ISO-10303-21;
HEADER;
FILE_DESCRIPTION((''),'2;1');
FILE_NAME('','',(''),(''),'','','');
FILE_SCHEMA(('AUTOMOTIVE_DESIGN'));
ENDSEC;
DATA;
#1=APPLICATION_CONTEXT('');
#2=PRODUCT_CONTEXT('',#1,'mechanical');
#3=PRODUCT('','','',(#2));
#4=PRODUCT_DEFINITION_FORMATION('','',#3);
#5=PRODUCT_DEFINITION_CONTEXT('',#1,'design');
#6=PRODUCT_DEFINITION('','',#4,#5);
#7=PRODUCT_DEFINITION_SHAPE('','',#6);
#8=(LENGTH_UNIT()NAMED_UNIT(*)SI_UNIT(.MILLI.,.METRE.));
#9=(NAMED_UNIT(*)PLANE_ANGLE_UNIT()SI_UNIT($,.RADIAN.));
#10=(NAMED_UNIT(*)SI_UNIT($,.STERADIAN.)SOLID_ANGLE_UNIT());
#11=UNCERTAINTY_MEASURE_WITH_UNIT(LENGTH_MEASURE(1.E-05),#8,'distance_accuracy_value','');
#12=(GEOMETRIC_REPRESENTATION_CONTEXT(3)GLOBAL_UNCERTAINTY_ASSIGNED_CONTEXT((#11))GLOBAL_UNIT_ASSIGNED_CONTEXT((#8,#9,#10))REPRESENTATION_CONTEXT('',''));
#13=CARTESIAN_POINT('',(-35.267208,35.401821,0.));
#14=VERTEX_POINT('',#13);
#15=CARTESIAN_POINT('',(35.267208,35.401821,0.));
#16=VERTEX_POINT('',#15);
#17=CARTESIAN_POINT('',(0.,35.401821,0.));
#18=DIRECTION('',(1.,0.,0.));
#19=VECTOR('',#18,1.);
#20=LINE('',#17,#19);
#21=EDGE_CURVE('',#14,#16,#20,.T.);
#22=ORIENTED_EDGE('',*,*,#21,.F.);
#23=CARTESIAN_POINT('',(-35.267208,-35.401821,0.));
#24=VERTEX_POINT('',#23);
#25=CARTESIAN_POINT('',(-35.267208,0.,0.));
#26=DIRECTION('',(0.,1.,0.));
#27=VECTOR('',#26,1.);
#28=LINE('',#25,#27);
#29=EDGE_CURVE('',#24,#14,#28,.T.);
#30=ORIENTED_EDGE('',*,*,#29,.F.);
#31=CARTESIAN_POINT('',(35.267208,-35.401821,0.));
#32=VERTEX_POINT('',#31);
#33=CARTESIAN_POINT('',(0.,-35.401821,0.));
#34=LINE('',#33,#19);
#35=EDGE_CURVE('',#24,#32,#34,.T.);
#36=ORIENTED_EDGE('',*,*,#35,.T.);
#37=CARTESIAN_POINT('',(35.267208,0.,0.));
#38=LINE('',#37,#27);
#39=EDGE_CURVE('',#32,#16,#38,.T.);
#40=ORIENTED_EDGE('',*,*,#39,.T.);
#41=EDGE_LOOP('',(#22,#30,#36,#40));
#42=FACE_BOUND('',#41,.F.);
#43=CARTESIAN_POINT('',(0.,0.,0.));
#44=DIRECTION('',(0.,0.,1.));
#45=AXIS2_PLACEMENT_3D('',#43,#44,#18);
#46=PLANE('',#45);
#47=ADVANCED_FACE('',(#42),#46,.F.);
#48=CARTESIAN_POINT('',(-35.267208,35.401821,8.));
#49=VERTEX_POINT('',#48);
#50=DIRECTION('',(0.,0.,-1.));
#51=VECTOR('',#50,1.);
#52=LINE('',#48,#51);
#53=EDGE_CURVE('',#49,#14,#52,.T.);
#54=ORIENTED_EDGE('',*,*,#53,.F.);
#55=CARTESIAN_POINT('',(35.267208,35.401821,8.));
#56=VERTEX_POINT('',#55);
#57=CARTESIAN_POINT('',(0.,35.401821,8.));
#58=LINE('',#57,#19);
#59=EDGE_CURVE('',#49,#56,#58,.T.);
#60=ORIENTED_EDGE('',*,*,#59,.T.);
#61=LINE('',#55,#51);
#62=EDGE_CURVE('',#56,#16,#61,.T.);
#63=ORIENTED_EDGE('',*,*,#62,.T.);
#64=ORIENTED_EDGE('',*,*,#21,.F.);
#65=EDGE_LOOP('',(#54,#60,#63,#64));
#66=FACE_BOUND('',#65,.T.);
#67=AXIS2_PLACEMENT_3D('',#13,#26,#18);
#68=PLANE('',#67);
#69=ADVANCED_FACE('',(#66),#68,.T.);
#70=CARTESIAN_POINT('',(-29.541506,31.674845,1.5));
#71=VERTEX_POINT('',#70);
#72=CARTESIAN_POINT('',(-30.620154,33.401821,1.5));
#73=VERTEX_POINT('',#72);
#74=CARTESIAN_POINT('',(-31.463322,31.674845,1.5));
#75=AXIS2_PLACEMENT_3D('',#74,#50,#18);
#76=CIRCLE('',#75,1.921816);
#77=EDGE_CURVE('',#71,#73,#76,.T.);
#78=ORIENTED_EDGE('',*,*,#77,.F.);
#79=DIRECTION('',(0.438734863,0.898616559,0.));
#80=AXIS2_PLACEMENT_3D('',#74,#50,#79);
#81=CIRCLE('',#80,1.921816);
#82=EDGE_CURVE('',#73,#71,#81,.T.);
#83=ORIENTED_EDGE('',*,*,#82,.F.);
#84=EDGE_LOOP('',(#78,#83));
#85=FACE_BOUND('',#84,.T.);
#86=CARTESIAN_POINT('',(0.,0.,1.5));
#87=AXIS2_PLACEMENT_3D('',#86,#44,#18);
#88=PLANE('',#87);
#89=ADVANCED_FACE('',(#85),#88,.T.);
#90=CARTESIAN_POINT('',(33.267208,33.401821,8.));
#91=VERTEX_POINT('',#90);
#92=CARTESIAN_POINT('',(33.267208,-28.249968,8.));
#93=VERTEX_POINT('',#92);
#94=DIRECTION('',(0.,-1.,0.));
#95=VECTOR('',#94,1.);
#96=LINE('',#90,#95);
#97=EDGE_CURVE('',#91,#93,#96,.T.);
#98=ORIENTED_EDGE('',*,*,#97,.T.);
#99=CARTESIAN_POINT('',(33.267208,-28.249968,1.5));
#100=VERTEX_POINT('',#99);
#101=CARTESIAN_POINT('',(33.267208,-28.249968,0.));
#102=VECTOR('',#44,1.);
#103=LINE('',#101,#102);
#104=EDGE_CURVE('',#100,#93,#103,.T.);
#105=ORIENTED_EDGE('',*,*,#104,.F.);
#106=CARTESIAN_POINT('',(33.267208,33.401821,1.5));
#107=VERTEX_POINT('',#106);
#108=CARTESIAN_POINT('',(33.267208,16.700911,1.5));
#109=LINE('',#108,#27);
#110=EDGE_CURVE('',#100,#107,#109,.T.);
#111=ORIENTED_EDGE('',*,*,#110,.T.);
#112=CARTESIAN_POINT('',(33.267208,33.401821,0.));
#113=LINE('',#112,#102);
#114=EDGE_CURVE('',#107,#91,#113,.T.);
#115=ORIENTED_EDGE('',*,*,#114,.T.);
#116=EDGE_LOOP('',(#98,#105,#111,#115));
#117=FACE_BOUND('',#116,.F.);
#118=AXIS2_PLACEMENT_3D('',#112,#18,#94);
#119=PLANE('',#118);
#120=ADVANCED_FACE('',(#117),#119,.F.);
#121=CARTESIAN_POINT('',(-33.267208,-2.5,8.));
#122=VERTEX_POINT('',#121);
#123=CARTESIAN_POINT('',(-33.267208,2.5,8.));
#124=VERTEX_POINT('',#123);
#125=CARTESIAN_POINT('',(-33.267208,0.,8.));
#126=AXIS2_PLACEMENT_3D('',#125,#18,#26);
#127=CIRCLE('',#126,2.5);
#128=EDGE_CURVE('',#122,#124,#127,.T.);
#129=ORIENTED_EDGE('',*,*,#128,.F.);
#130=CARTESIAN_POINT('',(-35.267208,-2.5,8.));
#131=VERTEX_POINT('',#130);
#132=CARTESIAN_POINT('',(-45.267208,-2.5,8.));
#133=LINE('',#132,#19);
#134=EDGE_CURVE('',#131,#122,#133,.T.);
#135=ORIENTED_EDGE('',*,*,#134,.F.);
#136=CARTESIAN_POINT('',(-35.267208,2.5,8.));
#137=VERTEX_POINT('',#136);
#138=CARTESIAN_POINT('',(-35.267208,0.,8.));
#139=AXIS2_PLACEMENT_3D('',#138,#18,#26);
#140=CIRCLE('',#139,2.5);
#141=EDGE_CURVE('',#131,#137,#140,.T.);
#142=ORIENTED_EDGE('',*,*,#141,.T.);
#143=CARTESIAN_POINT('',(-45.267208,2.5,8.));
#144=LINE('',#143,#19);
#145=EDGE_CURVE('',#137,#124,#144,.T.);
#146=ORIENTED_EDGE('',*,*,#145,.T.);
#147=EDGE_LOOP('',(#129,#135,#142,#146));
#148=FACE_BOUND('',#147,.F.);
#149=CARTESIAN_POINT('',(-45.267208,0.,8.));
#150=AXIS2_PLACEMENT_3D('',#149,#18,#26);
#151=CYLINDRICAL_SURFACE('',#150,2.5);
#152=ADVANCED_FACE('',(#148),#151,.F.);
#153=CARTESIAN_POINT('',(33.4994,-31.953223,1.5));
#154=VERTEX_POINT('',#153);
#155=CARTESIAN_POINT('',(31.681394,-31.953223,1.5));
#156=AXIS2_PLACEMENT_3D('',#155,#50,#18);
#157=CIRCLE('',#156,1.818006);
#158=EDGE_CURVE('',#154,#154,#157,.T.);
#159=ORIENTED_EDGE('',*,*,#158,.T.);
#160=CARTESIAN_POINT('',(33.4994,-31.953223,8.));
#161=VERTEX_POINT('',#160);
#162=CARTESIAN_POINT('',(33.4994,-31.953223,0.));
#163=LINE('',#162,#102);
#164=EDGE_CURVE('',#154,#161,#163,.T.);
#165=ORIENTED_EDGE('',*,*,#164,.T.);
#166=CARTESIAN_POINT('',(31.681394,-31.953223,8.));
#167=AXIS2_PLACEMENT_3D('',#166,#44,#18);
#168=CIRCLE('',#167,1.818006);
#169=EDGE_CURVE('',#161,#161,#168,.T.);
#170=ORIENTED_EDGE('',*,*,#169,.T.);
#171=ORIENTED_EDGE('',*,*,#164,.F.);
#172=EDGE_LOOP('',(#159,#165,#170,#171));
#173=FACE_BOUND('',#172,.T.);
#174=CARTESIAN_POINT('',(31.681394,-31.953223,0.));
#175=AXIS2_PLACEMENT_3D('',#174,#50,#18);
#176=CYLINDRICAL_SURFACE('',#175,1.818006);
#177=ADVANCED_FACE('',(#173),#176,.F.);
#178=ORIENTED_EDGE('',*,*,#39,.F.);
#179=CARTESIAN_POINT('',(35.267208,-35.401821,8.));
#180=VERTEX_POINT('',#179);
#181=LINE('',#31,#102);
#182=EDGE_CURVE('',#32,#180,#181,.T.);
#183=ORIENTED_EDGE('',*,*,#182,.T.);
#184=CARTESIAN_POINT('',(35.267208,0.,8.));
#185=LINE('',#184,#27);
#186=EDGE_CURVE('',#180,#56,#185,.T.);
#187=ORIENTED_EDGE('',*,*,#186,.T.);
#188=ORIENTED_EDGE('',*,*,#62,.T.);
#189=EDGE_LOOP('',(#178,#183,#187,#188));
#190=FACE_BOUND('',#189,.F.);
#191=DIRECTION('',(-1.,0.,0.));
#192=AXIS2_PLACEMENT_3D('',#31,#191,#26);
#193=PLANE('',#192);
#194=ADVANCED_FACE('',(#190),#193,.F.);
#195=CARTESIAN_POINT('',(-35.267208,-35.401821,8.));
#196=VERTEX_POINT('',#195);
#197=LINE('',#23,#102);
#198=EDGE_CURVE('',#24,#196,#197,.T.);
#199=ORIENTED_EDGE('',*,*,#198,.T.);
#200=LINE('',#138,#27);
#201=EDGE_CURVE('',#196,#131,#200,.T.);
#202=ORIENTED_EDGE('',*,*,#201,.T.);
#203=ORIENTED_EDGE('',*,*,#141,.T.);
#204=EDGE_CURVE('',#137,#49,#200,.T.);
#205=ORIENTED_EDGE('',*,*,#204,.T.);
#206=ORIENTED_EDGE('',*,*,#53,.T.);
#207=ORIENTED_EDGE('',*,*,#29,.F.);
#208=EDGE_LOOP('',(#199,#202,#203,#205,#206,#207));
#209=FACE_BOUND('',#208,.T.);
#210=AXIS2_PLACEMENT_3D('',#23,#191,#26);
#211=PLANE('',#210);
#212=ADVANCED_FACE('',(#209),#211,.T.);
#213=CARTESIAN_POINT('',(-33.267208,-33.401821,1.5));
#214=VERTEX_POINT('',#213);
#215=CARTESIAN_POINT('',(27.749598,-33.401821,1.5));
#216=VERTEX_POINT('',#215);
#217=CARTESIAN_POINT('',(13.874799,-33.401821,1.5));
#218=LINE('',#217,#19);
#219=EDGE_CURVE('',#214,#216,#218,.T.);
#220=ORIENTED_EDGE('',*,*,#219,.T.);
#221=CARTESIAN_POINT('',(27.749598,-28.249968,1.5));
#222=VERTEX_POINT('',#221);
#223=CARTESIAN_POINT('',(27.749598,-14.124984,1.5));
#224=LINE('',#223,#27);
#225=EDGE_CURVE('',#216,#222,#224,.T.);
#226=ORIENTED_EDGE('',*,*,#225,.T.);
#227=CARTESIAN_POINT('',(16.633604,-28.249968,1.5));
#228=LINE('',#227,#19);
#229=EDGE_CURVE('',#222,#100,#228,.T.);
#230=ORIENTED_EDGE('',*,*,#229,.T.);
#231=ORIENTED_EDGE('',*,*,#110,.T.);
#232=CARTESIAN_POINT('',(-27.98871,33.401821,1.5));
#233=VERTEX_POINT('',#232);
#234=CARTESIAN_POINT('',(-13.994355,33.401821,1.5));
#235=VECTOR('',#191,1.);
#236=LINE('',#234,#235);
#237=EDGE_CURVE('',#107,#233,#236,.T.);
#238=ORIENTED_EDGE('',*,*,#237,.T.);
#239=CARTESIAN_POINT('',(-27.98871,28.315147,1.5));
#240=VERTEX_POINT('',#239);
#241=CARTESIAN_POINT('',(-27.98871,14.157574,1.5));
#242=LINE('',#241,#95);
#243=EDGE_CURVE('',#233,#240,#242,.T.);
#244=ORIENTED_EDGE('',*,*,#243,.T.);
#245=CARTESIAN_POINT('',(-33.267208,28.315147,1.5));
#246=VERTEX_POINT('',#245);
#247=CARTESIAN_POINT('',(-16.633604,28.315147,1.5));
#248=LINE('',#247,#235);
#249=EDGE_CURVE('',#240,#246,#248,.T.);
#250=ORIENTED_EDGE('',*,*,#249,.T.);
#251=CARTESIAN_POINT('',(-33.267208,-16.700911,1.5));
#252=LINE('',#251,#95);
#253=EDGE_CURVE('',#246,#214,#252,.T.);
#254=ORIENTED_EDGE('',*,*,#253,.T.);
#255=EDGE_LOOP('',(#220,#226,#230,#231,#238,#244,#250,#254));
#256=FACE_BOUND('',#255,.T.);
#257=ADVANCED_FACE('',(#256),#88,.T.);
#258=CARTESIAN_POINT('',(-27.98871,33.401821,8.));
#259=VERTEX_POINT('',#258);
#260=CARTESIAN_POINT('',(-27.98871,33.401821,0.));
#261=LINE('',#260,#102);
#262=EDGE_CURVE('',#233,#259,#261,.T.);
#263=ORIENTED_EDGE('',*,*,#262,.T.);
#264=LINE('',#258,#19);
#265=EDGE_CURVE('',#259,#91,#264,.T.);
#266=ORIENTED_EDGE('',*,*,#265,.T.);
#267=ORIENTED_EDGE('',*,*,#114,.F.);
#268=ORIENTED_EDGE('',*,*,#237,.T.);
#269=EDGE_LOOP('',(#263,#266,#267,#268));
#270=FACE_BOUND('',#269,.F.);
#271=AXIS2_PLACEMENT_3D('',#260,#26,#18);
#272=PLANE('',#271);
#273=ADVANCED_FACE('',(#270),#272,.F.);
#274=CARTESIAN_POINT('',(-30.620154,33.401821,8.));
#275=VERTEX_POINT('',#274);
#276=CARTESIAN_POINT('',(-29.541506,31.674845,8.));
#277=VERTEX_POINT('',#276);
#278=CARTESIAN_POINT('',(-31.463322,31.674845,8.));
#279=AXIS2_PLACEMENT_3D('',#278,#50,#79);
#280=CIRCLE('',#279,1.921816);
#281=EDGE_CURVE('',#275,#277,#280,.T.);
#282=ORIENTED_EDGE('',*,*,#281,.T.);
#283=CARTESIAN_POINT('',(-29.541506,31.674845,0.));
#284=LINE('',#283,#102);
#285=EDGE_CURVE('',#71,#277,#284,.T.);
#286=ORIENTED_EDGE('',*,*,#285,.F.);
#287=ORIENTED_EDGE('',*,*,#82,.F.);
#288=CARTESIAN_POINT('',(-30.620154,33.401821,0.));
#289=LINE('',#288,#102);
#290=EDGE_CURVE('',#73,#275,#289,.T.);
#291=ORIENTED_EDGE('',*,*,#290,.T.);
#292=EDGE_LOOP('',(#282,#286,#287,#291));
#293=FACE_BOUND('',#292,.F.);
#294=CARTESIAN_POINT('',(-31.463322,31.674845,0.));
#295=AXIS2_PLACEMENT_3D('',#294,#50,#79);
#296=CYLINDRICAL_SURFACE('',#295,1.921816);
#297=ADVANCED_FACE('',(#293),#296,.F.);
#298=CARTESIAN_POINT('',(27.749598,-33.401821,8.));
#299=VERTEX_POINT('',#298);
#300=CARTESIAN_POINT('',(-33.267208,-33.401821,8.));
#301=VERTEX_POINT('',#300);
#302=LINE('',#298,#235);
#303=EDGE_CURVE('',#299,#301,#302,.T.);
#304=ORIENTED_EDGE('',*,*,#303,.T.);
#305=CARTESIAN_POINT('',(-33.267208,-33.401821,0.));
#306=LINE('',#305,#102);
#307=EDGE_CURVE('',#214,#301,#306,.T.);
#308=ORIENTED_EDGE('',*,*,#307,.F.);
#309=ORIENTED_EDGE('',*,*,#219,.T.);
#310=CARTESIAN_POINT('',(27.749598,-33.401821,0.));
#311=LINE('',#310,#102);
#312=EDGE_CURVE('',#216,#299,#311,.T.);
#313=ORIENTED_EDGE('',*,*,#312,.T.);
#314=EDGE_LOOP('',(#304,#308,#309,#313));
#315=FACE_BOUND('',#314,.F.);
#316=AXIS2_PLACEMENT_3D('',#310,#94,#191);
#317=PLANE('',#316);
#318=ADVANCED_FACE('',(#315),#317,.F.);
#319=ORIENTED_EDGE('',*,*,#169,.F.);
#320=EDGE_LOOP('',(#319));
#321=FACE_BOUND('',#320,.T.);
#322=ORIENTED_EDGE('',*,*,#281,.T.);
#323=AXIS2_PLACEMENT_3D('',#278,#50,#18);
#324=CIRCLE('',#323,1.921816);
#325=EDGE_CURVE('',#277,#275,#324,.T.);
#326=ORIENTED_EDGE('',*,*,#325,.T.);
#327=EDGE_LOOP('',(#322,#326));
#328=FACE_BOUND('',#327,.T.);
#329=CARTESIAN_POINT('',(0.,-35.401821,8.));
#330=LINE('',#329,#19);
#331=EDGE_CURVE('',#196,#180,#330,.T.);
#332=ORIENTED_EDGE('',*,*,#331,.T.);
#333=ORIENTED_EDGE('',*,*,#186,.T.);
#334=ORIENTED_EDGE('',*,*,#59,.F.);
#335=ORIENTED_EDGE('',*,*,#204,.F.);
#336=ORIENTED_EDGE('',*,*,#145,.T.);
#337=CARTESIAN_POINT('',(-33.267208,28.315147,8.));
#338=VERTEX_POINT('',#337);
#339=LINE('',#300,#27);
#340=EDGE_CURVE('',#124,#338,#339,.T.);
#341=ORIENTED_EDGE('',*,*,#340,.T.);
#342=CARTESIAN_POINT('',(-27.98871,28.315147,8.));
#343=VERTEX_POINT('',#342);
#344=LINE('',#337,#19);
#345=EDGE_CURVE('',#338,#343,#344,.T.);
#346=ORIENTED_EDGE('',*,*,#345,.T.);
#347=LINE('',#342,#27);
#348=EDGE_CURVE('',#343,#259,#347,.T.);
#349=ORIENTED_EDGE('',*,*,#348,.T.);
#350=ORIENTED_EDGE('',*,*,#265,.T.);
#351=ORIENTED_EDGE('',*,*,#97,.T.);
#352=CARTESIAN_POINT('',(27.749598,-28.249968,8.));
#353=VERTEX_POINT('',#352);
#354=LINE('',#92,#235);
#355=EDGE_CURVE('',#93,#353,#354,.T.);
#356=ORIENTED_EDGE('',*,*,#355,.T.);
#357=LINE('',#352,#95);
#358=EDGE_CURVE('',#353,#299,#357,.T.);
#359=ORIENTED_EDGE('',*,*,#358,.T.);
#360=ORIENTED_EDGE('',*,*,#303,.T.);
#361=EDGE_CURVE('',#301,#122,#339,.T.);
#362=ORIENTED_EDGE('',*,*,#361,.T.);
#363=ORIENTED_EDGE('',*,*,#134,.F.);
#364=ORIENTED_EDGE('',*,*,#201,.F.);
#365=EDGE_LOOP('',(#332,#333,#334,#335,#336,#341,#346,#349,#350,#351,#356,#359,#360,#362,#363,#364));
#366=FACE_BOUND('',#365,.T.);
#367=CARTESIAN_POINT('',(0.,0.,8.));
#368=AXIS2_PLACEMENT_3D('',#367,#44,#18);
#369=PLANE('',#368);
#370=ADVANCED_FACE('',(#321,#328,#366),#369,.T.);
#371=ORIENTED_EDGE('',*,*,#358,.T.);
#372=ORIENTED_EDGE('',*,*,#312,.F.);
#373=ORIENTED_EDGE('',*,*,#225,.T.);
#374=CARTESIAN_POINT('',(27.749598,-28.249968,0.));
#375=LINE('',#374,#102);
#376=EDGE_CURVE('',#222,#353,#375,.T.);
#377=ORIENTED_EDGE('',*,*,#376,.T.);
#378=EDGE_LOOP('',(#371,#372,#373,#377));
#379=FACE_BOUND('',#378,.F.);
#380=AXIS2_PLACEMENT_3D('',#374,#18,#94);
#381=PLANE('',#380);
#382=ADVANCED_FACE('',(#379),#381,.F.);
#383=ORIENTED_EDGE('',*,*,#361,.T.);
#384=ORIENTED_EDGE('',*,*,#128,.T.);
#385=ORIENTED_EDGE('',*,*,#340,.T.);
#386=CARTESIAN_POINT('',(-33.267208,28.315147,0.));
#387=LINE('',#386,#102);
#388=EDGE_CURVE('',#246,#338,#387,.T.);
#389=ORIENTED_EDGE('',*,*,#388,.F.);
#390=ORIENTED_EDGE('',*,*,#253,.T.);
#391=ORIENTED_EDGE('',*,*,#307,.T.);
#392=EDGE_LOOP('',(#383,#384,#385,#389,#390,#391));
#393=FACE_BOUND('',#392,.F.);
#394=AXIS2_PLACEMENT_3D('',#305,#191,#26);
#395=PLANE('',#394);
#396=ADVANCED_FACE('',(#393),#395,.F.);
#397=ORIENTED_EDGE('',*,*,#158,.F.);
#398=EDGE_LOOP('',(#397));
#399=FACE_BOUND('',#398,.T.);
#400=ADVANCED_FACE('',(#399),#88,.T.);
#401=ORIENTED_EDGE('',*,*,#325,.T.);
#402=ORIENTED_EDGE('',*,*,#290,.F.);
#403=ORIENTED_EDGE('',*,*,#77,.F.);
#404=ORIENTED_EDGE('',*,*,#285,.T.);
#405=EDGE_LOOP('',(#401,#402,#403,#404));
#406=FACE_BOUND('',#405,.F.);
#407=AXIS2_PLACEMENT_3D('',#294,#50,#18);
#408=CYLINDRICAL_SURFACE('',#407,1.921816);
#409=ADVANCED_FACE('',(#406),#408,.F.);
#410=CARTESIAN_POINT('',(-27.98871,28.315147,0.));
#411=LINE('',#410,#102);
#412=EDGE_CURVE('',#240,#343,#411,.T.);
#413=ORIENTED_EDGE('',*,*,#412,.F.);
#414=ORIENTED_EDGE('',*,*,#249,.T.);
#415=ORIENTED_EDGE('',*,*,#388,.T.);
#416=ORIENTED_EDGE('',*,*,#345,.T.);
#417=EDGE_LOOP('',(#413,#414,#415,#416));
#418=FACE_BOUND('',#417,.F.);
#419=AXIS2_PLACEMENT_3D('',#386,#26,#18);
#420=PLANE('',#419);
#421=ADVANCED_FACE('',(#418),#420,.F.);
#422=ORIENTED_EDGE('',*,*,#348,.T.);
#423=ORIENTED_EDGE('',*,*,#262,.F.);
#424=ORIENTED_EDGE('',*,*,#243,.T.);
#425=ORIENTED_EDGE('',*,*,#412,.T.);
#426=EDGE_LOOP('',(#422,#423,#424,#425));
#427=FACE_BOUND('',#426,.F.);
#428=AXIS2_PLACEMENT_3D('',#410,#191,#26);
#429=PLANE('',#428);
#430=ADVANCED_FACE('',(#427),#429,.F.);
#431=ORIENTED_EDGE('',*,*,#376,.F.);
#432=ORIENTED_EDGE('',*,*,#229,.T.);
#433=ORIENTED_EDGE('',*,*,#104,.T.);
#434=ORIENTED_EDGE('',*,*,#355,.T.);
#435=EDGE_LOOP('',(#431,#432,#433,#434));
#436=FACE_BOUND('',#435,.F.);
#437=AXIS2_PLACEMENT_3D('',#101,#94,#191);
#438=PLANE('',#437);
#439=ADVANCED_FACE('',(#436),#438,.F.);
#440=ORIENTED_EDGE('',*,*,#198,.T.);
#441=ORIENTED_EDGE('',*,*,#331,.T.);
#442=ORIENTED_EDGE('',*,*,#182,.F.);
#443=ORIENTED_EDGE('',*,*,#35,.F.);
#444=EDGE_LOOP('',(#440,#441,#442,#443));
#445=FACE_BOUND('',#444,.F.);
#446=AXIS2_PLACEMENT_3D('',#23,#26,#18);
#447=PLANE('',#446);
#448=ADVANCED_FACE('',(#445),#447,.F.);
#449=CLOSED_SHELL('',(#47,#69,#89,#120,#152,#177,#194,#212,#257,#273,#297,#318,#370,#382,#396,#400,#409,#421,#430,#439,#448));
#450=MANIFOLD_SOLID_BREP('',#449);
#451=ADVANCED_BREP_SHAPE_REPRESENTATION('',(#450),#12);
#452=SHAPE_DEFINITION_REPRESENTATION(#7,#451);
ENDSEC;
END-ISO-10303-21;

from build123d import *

# Parameters (mm, degrees)
F0_W     = 70.5344155431
F0_H     = 70.8036422729
F0_R     = 1.8180060759
F1_DEPTH = 1.5
F2_DEPTH = 8
F4_D     = 5
F4_DEPTH = 10
F4_TIP   = 1.5021515476


# Not quite as in the source:
# - a feature names something its author has since deleted; it is built from what else it names


with BuildPart() as f1:
    # F0 (on Top) → F1 (new body)
    with BuildSketch(Plane.XY):
        Rectangle(F0_W, F0_H)
        with Locations((31.6813939209, -31.9532230342)):
            Circle(F0_R, mode=Mode.SUBTRACT)
        Polygon((-27.9887095094, 33.4018211365), (33.2672077715, 33.4018211365), (33.2672077715, -28.2499678433), (27.7495980263, -28.2499678433), (27.7495980263, -33.4018211365), (-33.2672077715, -33.4018211365), (-33.2672077715, 28.315147385), (-27.9887095094, 28.315147385), align=None, mode=Mode.SUBTRACT)
        with BuildLine():
            ThreePointArc((-30.620154253, 33.4018211365), (-29.8333233875, 32.6929228695), (-29.5415057982, 31.6748452405))
            ThreePointArc((-29.5415057982, 31.6748452405), (-33.093320688, 30.6567676116), (-30.620154253, 33.4018211365))
        make_face(mode=Mode.SUBTRACT)
        Polygon((33.2672077715, -28.2499678433), (33.2672077715, 33.4018211365), (-27.9887095094, 33.4018211365), (-27.9887095094, 28.315147385), (-33.2672077715, 28.315147385), (-33.2672077715, -33.4018211365), (27.7495980263, -33.4018211365), (27.7495980263, -28.2499678433), align=None)
        with BuildLine():
            ThreePointArc((-30.620154253, 33.4018211365), (-33.093320688, 30.6567676116), (-29.5415057982, 31.6748452405))
            ThreePointArc((-29.5415057982, 31.6748452405), (-29.8333233875, 32.6929228695), (-30.620154253, 33.4018211365))
        make_face()
        with Locations((31.6813939209, -31.9532230342)):
            Circle(F0_R)
    extrude(amount=F1_DEPTH)

    # F0 (on Top) → F2 (join)
    with BuildSketch(Plane.XY):
        Rectangle(F0_W, F0_H)
        with Locations((31.6813939209, -31.9532230342)):
            Circle(F0_R, mode=Mode.SUBTRACT)
        Polygon((-27.9887095094, 33.4018211365), (33.2672077715, 33.4018211365), (33.2672077715, -28.2499678433), (27.7495980263, -28.2499678433), (27.7495980263, -33.4018211365), (-33.2672077715, -33.4018211365), (-33.2672077715, 28.315147385), (-27.9887095094, 28.315147385), align=None, mode=Mode.SUBTRACT)
        with BuildLine():
            ThreePointArc((-30.620154253, 33.4018211365), (-29.8333233875, 32.6929228695), (-29.5415057982, 31.6748452405))
            ThreePointArc((-29.5415057982, 31.6748452405), (-33.093320688, 30.6567676116), (-30.620154253, 33.4018211365))
        make_face(mode=Mode.SUBTRACT)
    extrude(amount=F2_DEPTH)

    # F4
    with Locations(Plane(origin=(-35.2672077715, 0, 0), x_dir=(0, -1, 0), z_dir=(-1, 0, 0))):
        with Locations((0, 8)):
            Hole(F4_D / 2, depth=F4_DEPTH)
            with Locations((0, 0, -(F4_DEPTH + F4_TIP / 2))):  # 118° drill point
                Cone(0, F4_D / 2, F4_TIP, mode=Mode.SUBTRACT)


solid = f1.part
